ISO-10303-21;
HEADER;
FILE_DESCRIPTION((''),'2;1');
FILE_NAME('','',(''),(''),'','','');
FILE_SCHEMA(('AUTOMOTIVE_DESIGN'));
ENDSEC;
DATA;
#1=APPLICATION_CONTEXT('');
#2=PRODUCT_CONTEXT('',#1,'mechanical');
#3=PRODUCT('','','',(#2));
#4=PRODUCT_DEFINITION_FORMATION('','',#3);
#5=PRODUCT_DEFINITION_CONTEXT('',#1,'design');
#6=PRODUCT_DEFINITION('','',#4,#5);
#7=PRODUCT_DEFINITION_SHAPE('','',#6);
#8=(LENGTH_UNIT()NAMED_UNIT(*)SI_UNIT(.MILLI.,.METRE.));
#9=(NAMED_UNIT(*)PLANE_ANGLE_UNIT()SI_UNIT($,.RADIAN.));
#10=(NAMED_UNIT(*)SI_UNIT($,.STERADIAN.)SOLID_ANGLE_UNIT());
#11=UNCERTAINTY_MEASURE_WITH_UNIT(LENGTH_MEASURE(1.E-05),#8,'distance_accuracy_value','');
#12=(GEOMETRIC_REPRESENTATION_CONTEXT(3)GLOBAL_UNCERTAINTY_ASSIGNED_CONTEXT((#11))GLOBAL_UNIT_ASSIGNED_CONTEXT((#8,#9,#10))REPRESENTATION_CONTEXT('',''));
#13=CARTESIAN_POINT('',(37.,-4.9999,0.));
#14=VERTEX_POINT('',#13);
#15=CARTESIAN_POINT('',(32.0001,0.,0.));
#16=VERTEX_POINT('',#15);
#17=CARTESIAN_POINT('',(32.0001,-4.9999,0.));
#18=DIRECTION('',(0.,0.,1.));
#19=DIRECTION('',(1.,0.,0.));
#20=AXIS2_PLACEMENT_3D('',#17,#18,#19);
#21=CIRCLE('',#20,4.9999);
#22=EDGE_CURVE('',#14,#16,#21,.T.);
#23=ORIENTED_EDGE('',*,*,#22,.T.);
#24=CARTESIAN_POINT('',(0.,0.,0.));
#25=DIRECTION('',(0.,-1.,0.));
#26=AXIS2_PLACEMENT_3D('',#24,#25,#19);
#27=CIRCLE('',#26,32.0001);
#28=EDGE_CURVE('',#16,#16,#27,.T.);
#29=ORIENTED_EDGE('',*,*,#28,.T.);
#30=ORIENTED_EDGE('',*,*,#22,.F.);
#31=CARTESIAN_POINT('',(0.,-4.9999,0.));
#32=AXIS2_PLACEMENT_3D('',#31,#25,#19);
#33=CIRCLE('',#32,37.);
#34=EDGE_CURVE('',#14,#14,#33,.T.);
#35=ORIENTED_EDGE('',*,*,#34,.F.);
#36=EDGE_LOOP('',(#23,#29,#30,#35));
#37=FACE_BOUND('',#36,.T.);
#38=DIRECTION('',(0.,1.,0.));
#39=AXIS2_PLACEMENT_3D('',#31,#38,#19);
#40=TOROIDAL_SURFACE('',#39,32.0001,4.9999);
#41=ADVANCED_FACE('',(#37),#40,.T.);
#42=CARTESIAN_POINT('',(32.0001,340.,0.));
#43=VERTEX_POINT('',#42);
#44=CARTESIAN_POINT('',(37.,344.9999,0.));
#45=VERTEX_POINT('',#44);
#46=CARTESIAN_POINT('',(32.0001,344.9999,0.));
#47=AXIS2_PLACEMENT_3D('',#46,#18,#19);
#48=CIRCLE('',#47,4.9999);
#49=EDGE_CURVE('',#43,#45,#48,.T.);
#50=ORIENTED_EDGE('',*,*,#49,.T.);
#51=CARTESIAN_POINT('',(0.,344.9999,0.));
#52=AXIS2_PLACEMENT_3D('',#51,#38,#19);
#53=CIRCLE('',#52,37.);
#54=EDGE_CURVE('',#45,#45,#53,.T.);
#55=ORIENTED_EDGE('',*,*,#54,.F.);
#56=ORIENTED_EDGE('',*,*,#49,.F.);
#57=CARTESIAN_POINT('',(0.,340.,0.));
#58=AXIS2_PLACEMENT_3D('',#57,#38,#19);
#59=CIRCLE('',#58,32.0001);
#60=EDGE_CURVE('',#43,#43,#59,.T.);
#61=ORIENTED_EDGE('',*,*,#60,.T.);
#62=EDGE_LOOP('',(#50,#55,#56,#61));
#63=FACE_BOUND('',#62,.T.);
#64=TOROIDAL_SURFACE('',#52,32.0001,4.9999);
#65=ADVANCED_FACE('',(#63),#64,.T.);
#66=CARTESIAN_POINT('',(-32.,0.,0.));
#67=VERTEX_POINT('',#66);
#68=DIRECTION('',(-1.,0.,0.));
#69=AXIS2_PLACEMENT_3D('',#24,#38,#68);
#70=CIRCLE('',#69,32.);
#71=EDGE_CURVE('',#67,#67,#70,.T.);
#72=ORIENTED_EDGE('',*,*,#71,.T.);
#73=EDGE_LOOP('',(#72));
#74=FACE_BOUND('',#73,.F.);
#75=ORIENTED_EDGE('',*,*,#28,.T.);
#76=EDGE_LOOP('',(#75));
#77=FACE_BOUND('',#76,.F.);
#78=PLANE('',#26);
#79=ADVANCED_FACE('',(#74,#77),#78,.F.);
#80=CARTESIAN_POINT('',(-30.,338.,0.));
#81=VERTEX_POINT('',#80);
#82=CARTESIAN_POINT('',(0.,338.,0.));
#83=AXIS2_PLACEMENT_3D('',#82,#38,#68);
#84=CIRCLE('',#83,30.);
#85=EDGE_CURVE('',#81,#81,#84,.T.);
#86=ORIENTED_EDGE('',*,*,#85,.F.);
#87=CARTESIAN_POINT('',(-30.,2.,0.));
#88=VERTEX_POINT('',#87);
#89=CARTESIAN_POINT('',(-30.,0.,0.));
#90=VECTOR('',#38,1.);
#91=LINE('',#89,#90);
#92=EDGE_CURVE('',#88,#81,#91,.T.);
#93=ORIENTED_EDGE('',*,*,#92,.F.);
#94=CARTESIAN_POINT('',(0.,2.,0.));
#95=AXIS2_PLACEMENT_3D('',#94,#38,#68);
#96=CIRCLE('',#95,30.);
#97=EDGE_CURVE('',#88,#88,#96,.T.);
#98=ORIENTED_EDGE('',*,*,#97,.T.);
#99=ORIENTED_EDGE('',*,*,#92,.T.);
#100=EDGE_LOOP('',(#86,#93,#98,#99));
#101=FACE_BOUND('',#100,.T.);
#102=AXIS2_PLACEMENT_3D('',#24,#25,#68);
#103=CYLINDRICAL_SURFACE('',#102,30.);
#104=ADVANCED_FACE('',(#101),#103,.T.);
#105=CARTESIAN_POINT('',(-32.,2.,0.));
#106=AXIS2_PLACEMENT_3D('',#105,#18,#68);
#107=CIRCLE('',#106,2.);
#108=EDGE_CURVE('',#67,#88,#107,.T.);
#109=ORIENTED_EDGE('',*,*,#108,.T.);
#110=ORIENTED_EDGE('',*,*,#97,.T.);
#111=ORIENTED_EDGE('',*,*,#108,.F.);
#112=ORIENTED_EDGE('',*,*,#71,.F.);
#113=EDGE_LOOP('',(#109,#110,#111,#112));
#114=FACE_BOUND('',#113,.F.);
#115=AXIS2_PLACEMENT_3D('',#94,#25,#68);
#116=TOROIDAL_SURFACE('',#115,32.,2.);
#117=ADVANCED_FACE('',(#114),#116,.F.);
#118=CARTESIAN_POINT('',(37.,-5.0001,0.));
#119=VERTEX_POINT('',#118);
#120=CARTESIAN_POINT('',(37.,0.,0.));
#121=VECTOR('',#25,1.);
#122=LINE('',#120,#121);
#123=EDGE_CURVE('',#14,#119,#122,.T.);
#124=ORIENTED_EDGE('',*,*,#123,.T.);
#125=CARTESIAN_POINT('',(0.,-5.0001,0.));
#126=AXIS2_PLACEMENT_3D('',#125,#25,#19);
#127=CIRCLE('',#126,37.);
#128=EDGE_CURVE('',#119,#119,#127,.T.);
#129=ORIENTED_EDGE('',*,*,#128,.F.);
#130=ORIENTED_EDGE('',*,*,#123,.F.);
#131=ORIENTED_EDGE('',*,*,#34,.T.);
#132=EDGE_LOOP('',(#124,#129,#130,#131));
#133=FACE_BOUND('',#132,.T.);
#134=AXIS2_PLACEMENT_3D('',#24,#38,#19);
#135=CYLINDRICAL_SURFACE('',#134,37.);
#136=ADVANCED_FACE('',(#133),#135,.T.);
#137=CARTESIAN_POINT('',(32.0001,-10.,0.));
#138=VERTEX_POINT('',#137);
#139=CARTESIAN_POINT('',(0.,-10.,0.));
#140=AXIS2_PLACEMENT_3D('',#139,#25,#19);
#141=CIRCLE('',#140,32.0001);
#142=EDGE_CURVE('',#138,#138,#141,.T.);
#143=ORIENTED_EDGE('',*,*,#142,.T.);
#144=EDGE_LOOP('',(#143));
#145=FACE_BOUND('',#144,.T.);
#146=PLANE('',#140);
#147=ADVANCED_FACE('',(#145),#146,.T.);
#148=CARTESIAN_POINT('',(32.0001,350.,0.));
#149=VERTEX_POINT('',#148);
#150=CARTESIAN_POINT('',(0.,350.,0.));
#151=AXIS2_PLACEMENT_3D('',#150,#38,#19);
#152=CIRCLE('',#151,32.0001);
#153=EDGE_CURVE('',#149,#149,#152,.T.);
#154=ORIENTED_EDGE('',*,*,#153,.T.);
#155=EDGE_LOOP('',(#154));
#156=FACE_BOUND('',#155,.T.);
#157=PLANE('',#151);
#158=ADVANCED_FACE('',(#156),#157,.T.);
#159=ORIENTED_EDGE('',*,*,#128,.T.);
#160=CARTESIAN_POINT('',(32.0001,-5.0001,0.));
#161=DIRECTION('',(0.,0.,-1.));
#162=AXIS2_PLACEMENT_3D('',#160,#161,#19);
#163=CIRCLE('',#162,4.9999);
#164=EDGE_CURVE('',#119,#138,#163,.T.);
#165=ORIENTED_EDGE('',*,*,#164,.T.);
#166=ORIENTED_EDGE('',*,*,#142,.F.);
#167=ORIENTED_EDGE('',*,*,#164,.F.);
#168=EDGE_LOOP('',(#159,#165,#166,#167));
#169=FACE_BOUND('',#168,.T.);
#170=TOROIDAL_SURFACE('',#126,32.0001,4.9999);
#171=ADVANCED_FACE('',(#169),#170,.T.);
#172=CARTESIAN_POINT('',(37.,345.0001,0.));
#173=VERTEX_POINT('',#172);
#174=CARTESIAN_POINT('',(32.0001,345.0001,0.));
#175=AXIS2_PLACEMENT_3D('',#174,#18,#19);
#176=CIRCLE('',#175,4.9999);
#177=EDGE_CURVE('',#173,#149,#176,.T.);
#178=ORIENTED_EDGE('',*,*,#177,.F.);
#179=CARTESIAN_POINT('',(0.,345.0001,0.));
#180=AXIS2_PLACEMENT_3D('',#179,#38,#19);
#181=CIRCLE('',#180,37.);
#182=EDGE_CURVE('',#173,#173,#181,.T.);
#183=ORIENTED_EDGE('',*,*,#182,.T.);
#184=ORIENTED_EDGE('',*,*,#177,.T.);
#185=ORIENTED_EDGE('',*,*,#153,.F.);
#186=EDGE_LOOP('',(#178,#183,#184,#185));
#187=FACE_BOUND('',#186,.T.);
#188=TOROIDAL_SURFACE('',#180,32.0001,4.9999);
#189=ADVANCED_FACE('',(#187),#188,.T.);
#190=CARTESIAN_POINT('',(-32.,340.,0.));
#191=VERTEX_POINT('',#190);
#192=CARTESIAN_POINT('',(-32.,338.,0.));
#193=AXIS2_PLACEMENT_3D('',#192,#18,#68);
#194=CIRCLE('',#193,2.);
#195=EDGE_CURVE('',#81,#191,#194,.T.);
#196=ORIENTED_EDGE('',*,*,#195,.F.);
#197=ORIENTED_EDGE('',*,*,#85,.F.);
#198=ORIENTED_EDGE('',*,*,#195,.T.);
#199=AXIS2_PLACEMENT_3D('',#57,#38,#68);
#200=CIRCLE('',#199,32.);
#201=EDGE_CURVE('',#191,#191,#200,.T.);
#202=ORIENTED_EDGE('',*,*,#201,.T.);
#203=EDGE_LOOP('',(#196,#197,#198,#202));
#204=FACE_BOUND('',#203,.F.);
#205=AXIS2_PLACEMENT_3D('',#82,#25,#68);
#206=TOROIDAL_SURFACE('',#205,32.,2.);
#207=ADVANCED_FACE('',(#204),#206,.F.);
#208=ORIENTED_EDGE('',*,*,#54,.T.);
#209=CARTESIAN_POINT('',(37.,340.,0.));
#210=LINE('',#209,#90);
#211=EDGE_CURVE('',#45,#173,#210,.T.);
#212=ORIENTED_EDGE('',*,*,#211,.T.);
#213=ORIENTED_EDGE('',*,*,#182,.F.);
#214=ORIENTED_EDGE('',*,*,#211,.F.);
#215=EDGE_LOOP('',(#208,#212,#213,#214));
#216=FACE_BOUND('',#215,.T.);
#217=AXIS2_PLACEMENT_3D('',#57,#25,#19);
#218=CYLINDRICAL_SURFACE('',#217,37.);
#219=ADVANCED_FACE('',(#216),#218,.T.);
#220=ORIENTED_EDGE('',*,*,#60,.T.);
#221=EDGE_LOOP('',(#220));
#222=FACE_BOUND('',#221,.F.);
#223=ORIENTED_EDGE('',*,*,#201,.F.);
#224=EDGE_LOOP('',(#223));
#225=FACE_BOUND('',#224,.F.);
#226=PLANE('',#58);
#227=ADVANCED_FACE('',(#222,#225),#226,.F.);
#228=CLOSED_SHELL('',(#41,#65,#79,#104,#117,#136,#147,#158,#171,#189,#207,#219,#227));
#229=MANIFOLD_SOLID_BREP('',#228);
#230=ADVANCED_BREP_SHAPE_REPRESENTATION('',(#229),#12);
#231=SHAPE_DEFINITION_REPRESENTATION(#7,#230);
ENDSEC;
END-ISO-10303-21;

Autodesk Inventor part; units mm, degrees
ref_plane "YZ Plane" through (0, 0, 0) normal (1, 0, 0) x (0, 1, 0)
ref_plane "XZ Plane" through (0, 0, 0) normal (0, 1, 0) x (-1, 0, 0)
ref_plane "XY Plane" through (0, 0, 0) normal (0, 0, 1) x (1, 0, 0)
sketch "草图1" plane through (0, 0, 0) normal (0, 1, 0) x (-1, 0, 0)
  circle A0 centre (0, 0) radius 30
  dimension "d0" = 60
extrude "拉伸1" add sketch "草图1" along normal blind 340
sketch "草图2" plane through (0, 340, 0) normal (0, 1, 0) x (1, 0, 0)
  circle A0 centre (0, 0) radius 37
extrude "拉伸2" add sketch "草图2" along normal blind 10
sketch "草图3" plane through (0, 0, 0) normal (0, -1, 0) x (1, 0, 0)
  circle A0 centre (0, 0) radius 37
extrude "拉伸3" add sketch "草图3" along normal blind 10
fillet "圆角1" radius 5 4 edges at (-37, 350, 0) (-37, 340, 0) (-37, 0, 0) (-37, -10, 0)
fillet "圆角2" radius 2 2 edges at (30, 340, 0) (30, 0, 0)
properties part number "销钉" material "钢，高强度，低合金"
